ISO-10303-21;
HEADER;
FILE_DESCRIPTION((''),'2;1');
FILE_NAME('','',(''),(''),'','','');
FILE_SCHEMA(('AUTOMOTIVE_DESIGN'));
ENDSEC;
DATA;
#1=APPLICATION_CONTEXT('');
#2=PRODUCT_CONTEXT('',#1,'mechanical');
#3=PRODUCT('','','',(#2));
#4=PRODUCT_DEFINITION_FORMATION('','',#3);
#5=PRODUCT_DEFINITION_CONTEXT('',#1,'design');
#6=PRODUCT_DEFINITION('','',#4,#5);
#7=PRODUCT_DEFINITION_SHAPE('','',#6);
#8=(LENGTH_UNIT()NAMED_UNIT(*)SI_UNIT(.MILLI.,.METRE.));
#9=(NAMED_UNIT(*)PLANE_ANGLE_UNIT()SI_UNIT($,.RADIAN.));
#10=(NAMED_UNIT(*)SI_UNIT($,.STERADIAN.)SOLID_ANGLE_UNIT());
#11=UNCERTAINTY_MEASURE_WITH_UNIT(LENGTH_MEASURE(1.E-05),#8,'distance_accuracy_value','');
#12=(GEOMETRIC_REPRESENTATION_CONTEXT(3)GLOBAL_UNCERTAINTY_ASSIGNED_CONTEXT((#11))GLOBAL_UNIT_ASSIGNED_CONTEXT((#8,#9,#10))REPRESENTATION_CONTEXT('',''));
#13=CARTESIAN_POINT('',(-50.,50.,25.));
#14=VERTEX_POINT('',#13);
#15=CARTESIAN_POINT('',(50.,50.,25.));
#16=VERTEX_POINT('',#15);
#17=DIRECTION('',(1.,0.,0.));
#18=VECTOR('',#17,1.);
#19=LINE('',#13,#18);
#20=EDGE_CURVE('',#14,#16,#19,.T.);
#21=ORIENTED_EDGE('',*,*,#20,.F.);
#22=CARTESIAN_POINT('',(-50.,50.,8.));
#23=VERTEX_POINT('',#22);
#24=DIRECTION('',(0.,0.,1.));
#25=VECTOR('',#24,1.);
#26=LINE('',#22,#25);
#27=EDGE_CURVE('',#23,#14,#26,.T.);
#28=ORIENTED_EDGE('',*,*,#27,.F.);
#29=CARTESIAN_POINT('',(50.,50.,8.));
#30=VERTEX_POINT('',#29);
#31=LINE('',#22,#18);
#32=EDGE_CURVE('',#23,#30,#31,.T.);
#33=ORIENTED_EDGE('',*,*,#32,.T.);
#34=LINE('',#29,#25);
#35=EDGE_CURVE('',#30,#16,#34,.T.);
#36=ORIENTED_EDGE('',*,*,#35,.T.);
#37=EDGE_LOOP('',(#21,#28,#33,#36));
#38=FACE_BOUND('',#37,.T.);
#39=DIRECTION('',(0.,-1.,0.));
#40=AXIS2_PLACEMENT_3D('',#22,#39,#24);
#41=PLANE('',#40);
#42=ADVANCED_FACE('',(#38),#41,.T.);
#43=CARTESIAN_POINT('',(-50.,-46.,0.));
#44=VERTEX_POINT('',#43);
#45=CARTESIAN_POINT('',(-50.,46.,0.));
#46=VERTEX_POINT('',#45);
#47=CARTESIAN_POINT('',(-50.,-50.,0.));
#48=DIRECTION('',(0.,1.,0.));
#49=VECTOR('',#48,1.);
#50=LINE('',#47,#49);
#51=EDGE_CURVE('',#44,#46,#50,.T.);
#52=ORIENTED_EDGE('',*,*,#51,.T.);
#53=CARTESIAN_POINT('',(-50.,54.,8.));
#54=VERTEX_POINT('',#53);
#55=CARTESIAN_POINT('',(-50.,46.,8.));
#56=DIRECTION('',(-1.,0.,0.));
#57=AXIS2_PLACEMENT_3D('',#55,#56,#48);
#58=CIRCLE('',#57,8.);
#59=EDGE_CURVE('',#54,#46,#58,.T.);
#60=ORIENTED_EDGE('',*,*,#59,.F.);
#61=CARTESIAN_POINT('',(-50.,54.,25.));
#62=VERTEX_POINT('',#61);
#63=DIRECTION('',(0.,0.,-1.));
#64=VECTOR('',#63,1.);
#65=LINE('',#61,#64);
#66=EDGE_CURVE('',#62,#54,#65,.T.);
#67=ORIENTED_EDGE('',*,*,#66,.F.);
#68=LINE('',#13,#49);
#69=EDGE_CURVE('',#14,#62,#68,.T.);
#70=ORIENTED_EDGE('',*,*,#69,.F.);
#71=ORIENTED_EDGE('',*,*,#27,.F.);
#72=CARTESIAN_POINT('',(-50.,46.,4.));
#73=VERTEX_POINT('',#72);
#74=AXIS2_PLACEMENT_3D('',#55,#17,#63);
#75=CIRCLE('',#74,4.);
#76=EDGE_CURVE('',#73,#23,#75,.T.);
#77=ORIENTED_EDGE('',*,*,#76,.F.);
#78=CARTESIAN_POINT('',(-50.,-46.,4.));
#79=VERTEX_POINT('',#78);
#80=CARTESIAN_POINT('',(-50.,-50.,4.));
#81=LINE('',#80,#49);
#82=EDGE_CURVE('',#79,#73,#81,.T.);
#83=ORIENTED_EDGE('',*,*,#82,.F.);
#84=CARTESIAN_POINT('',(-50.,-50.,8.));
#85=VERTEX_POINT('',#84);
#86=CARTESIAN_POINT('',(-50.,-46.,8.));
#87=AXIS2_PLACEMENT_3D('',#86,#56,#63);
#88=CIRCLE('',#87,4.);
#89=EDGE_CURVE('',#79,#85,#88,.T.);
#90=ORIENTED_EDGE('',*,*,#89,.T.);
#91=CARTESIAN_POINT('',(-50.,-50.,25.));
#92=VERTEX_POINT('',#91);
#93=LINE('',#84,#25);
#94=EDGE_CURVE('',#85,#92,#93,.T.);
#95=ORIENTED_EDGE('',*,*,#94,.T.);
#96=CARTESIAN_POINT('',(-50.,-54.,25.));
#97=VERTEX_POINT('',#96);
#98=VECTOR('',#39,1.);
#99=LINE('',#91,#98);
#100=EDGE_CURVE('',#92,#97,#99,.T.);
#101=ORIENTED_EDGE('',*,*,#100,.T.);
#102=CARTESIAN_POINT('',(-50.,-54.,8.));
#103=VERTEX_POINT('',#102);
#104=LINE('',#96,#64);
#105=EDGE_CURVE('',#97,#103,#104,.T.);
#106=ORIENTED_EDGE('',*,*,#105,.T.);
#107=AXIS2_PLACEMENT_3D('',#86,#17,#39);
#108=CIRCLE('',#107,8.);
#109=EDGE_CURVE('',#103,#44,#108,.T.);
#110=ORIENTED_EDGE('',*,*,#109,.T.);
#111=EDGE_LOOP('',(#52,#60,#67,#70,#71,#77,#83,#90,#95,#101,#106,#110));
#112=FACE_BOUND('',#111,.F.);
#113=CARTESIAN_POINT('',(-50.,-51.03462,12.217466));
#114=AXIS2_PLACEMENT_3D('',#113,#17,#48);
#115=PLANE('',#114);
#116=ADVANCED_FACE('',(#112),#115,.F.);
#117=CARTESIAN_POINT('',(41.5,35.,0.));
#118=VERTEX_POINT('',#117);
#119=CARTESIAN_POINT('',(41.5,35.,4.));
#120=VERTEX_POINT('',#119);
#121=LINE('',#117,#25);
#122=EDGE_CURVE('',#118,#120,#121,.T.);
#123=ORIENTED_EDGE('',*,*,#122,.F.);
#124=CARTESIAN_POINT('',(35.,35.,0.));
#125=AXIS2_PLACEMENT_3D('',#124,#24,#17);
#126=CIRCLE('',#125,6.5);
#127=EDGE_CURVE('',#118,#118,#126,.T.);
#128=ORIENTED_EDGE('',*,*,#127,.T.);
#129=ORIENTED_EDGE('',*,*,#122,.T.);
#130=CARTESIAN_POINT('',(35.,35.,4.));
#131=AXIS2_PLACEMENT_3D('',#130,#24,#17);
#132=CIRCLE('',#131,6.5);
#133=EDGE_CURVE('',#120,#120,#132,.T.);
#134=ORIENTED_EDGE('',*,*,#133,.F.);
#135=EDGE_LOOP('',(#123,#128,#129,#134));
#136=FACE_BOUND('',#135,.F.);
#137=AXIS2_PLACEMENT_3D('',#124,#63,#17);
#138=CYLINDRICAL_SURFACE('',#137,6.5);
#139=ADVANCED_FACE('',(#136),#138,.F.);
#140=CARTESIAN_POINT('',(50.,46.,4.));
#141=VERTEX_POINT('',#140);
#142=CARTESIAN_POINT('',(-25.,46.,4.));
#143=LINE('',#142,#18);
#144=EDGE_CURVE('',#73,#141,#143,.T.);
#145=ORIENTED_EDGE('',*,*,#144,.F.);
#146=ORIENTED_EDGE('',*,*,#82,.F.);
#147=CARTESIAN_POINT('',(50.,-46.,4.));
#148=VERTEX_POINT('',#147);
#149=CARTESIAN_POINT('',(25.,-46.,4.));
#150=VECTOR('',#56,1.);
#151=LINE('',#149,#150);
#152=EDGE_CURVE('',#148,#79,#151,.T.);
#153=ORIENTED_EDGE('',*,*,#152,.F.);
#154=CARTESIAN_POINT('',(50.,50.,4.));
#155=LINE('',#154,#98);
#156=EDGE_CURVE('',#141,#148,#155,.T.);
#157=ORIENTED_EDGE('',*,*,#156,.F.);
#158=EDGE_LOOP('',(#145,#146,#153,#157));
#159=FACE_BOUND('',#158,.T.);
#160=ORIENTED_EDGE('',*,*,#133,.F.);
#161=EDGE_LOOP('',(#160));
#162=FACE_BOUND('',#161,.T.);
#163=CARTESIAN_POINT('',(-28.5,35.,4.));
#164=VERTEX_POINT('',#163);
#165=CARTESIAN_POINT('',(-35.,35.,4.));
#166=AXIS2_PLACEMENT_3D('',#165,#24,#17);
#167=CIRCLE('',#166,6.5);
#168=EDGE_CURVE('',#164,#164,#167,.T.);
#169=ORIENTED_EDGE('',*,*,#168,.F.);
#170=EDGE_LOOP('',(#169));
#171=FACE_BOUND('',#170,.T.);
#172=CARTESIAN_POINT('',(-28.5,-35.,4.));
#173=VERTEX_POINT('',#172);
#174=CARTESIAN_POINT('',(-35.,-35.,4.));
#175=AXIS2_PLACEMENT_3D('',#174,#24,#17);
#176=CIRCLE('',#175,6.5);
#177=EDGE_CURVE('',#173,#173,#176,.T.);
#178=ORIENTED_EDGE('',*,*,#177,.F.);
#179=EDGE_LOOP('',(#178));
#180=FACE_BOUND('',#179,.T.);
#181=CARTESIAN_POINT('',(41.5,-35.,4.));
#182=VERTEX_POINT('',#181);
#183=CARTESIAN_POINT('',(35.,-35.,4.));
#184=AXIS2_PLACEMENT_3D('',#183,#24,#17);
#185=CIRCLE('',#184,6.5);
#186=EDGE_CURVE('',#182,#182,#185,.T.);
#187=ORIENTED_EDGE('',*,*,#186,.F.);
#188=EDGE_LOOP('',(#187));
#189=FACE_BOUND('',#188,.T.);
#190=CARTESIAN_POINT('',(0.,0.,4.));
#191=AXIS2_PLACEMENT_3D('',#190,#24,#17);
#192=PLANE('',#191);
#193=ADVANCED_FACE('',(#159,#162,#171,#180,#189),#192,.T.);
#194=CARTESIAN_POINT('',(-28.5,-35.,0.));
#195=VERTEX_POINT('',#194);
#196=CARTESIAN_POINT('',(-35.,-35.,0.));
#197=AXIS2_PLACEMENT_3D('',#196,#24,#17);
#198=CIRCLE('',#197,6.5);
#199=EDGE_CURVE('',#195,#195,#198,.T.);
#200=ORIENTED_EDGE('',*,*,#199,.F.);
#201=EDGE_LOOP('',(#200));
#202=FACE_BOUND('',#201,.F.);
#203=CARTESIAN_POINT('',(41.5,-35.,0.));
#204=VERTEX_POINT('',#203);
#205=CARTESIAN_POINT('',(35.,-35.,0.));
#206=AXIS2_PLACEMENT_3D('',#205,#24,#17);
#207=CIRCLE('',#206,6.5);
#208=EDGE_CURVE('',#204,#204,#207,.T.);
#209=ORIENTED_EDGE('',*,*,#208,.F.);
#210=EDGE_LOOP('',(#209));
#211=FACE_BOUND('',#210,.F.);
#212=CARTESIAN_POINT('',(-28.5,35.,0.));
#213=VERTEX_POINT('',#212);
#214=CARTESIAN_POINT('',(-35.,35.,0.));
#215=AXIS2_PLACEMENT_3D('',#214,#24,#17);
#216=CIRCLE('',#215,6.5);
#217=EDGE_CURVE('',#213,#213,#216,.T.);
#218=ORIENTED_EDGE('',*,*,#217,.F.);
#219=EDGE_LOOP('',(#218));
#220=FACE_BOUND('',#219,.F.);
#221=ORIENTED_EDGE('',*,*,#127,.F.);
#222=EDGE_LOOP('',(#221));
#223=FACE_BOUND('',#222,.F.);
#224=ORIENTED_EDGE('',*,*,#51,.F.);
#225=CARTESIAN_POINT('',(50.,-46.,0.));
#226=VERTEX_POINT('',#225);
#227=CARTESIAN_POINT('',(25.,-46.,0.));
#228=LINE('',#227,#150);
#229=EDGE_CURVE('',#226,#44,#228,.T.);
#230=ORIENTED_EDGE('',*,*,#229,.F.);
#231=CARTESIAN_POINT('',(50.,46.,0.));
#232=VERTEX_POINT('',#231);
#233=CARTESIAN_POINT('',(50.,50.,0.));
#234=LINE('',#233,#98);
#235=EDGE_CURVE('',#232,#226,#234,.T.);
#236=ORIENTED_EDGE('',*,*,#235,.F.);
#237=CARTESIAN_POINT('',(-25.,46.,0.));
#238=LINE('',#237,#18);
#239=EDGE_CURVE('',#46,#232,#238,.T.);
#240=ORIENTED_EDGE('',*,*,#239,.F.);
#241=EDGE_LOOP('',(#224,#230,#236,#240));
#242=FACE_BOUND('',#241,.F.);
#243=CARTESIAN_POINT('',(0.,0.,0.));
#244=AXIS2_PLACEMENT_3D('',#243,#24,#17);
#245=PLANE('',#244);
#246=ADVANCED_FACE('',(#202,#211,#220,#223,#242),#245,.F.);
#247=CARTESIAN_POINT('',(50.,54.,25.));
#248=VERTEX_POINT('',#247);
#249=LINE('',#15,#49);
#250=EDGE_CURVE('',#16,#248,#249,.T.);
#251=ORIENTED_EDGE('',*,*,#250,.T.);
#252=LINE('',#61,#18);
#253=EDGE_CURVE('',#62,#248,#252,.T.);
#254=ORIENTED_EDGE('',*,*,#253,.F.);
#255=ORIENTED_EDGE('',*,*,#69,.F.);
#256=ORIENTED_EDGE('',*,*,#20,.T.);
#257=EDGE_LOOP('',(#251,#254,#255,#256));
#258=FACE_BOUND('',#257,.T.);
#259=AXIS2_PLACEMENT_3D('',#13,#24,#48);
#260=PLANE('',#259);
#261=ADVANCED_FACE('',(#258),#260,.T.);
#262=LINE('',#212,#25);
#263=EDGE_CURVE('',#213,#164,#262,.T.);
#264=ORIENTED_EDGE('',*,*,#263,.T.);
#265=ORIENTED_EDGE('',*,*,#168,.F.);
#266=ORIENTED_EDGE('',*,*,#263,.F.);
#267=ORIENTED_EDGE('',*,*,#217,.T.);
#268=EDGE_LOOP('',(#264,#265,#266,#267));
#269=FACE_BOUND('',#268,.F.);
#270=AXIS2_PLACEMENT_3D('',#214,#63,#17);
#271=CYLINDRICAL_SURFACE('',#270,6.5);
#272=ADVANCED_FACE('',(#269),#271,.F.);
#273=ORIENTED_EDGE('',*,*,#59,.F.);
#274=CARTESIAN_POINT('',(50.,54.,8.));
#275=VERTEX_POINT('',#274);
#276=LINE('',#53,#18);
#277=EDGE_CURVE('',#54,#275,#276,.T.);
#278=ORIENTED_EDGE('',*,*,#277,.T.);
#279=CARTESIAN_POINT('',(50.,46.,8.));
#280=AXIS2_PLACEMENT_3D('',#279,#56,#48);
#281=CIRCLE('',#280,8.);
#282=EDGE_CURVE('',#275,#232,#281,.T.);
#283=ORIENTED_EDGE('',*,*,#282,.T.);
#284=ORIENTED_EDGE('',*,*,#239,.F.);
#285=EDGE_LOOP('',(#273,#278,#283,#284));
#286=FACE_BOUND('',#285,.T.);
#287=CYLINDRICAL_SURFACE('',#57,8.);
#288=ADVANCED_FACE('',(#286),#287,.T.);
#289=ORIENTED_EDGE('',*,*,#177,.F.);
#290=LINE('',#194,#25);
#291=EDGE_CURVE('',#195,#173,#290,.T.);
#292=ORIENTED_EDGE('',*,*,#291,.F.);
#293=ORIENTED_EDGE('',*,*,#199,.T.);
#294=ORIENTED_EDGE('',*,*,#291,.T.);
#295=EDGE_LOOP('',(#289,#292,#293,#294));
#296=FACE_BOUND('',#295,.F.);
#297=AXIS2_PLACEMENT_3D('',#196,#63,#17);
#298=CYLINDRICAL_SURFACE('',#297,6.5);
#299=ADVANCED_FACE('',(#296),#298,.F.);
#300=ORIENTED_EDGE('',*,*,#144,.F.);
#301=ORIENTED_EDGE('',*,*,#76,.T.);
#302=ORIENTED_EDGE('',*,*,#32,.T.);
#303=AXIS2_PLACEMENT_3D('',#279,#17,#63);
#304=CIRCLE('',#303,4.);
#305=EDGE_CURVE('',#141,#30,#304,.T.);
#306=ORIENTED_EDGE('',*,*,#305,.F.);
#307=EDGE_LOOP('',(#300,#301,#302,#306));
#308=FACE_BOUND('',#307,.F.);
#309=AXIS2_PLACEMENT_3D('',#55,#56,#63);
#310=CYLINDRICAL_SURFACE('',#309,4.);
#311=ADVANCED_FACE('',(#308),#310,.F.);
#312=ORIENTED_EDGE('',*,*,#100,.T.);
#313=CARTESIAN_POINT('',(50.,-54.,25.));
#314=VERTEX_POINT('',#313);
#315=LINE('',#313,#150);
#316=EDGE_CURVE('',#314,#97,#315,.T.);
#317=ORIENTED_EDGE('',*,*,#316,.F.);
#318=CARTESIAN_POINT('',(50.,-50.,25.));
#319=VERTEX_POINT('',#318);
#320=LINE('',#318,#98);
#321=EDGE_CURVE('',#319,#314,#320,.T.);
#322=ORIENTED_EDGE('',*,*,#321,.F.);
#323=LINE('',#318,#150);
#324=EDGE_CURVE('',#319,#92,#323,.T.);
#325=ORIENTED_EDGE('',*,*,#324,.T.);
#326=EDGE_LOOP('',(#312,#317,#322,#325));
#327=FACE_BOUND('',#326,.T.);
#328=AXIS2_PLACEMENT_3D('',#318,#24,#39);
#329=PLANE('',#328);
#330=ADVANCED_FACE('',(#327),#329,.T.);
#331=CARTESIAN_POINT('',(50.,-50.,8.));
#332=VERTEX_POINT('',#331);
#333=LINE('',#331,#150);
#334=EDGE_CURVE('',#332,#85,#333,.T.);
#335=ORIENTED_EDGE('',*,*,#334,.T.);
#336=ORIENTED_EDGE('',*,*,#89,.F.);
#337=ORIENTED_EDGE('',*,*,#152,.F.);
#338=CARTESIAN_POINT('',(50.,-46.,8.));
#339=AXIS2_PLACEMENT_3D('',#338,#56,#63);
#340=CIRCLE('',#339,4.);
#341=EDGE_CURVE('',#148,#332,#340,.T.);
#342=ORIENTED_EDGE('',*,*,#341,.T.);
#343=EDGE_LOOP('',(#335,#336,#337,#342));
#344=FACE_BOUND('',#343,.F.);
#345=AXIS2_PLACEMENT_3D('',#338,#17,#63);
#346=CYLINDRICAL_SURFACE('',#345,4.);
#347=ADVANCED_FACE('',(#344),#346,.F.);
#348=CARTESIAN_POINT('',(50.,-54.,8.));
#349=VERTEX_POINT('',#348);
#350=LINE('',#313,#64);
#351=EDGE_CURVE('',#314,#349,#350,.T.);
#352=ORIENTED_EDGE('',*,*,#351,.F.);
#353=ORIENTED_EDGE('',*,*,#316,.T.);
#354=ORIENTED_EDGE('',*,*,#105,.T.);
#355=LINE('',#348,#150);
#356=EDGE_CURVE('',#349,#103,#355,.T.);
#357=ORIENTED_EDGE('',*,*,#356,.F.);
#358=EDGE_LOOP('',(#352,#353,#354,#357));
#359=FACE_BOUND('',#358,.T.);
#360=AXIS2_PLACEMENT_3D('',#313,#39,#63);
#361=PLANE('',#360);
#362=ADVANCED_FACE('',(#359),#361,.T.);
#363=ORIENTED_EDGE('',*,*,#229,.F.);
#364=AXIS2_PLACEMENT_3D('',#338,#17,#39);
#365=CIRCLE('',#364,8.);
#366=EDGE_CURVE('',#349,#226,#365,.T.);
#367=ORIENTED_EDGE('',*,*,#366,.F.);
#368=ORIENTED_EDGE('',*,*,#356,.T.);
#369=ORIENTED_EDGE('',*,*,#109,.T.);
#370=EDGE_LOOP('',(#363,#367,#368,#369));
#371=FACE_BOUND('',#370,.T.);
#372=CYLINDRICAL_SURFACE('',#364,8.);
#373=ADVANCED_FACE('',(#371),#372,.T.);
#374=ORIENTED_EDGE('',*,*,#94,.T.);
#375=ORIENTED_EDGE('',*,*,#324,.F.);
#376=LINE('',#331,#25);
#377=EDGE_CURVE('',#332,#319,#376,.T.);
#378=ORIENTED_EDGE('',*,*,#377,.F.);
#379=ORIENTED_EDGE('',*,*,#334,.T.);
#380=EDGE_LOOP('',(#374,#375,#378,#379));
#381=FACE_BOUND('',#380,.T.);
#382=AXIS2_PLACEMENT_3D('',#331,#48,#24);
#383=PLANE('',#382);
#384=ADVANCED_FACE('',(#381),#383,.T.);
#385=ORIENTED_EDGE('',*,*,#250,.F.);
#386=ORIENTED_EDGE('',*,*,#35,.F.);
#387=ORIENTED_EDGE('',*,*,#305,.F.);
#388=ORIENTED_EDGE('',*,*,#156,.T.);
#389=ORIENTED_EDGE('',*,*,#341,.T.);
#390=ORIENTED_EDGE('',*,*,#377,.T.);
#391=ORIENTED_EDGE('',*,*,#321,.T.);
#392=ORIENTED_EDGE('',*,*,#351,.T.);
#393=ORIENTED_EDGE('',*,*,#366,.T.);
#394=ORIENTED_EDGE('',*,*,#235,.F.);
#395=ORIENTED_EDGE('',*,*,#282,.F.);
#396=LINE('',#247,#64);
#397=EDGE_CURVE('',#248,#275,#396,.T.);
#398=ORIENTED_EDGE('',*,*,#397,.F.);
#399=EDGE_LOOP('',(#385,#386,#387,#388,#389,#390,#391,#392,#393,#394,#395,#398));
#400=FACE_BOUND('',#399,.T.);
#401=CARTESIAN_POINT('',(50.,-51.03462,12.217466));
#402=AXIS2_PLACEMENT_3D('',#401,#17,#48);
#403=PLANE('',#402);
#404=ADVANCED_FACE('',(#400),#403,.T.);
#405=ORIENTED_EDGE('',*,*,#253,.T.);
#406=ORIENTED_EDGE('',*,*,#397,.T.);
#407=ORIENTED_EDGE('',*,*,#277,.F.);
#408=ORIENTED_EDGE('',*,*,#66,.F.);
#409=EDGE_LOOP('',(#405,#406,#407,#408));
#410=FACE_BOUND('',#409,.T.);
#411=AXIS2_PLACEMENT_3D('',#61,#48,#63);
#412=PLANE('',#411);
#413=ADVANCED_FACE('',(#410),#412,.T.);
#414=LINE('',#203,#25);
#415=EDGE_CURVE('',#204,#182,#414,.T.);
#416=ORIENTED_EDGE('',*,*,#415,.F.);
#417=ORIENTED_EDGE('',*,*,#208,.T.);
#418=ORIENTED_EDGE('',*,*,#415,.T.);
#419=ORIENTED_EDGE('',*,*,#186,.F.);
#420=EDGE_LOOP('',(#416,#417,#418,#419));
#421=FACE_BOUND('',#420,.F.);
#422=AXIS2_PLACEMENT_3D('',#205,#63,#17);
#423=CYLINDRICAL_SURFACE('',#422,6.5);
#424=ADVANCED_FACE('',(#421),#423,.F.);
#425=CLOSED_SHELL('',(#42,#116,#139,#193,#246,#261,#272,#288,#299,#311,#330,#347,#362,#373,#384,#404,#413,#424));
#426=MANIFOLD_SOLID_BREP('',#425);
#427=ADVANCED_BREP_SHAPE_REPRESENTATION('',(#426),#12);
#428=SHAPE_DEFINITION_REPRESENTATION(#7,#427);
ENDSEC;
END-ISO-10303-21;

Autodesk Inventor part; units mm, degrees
ref_plane "YZ Plane" through (0, 0, 0) normal (1, 0, 0) x (0, 1, 0)
ref_plane "XZ Plane" through (0, 0, 0) normal (0, 1, 0) x (-1, 0, 0)
ref_plane "XY Plane" through (0, 0, 0) normal (0, 0, 1) x (1, 0, 0)
sketch "Sketch1" plane through (0, 0, 0) normal (0, 0, 1) x (1, 0, 0)
  line L0 (-50, 50) -> (50, 50)
  line L1 (50, 50) -> (50, -50)
  line L2 (50, -50) -> (-50, -50)
  line L3 (-50, -50) -> (-50, 50)
  line L4 (-50, 50) -> (50, -50) construction
  line L5 (50, 50) -> (-50, -50) construction
  line L6 (0, 50) -> (0, -50) construction
  circle A0 centre (-35, -35) radius 6.5
  circle A1 centre (-35, 35) radius 6.5
  circle A2 centre (35, -35) radius 6.5
  circle A3 centre (35, 35) radius 6.5
  line L7 (35, 35) -> (-35, 35) construction
  line L8 (-35, 35) -> (-35, -35) construction
  line L9 (-35, -35) -> (35, -35) construction
  line L10 (35, -35) -> (35, 35) construction
  line L11 (35, 35) -> (-35, -35) construction
  line L12 (-35, 35) -> (35, -35) construction
  point P0 (0, 0)
  dimension "d0" = 100
  dimension "d1" = 100
  dimension "d19" = 13
  dimension "d20" = 70
extrude "Plate1" add sketch "Sketch1" along normal blind 4
sketch "Sketch3" plane through (50, -54, 0) normal (0, 1, 0) x (-1, 0, 0)
  line L0 (100, 0) -> (0, 0)
  line L1 (0, 0) -> (0, 25)
  line L2 (0, 25) -> (100, 25)
  line L3 (100, 25) -> (100, 0)
edge flange "Flange1" height 25 angle 90 thickness 4 bend radius 4 thickness toward (0, 1, 0) relief tear relief width 4 relief depth 2 corner gap 4 corner form 0 edges at (0, -50, 4) (0, 50, 4) wall of the first edge with corners at (-50, -54, 0) (50, -54, 0) (50, -54, 25) (-50, -54, 25)
bend "Bend1"
corner "Corner1"
equation "\"d0\" = d1"
equation "\"d2\" = Thickness"
equation "\"d21\" = BendReliefWidth"
equation "\"d22\" = BendReliefDepth"
equation "\"d23\" = MinimumRemnant"
equation "\"d24\" = TransitionRadius"
equation "\"d27\" = BendRadius"
equation "\"d28\" = CornerReliefSize"
equation "\"d29\" = GapSize"
equation "\"d30\" = JacobiRadiusSize"
equation "\"BendRadius\" = Thickness"
equation "\"BendReliefWidth\" = Thickness"
equation "\"BendReliefDepth\" = 0.5 * Thickness"
equation "\"CornerReliefSize\" = 4 * Thickness"
equation "\"MinimumRemnant\" = 2 * Thickness"
equation "\"TransitionRadius\" = BendRadius"
equation "\"JacobiRadiusSize\" = BendRadius"
equation "\"GapSize\" = Thickness"
equation "\"Thickness\" = 4"
properties part number "GBK-RK-0820 ring plate_CPY"
